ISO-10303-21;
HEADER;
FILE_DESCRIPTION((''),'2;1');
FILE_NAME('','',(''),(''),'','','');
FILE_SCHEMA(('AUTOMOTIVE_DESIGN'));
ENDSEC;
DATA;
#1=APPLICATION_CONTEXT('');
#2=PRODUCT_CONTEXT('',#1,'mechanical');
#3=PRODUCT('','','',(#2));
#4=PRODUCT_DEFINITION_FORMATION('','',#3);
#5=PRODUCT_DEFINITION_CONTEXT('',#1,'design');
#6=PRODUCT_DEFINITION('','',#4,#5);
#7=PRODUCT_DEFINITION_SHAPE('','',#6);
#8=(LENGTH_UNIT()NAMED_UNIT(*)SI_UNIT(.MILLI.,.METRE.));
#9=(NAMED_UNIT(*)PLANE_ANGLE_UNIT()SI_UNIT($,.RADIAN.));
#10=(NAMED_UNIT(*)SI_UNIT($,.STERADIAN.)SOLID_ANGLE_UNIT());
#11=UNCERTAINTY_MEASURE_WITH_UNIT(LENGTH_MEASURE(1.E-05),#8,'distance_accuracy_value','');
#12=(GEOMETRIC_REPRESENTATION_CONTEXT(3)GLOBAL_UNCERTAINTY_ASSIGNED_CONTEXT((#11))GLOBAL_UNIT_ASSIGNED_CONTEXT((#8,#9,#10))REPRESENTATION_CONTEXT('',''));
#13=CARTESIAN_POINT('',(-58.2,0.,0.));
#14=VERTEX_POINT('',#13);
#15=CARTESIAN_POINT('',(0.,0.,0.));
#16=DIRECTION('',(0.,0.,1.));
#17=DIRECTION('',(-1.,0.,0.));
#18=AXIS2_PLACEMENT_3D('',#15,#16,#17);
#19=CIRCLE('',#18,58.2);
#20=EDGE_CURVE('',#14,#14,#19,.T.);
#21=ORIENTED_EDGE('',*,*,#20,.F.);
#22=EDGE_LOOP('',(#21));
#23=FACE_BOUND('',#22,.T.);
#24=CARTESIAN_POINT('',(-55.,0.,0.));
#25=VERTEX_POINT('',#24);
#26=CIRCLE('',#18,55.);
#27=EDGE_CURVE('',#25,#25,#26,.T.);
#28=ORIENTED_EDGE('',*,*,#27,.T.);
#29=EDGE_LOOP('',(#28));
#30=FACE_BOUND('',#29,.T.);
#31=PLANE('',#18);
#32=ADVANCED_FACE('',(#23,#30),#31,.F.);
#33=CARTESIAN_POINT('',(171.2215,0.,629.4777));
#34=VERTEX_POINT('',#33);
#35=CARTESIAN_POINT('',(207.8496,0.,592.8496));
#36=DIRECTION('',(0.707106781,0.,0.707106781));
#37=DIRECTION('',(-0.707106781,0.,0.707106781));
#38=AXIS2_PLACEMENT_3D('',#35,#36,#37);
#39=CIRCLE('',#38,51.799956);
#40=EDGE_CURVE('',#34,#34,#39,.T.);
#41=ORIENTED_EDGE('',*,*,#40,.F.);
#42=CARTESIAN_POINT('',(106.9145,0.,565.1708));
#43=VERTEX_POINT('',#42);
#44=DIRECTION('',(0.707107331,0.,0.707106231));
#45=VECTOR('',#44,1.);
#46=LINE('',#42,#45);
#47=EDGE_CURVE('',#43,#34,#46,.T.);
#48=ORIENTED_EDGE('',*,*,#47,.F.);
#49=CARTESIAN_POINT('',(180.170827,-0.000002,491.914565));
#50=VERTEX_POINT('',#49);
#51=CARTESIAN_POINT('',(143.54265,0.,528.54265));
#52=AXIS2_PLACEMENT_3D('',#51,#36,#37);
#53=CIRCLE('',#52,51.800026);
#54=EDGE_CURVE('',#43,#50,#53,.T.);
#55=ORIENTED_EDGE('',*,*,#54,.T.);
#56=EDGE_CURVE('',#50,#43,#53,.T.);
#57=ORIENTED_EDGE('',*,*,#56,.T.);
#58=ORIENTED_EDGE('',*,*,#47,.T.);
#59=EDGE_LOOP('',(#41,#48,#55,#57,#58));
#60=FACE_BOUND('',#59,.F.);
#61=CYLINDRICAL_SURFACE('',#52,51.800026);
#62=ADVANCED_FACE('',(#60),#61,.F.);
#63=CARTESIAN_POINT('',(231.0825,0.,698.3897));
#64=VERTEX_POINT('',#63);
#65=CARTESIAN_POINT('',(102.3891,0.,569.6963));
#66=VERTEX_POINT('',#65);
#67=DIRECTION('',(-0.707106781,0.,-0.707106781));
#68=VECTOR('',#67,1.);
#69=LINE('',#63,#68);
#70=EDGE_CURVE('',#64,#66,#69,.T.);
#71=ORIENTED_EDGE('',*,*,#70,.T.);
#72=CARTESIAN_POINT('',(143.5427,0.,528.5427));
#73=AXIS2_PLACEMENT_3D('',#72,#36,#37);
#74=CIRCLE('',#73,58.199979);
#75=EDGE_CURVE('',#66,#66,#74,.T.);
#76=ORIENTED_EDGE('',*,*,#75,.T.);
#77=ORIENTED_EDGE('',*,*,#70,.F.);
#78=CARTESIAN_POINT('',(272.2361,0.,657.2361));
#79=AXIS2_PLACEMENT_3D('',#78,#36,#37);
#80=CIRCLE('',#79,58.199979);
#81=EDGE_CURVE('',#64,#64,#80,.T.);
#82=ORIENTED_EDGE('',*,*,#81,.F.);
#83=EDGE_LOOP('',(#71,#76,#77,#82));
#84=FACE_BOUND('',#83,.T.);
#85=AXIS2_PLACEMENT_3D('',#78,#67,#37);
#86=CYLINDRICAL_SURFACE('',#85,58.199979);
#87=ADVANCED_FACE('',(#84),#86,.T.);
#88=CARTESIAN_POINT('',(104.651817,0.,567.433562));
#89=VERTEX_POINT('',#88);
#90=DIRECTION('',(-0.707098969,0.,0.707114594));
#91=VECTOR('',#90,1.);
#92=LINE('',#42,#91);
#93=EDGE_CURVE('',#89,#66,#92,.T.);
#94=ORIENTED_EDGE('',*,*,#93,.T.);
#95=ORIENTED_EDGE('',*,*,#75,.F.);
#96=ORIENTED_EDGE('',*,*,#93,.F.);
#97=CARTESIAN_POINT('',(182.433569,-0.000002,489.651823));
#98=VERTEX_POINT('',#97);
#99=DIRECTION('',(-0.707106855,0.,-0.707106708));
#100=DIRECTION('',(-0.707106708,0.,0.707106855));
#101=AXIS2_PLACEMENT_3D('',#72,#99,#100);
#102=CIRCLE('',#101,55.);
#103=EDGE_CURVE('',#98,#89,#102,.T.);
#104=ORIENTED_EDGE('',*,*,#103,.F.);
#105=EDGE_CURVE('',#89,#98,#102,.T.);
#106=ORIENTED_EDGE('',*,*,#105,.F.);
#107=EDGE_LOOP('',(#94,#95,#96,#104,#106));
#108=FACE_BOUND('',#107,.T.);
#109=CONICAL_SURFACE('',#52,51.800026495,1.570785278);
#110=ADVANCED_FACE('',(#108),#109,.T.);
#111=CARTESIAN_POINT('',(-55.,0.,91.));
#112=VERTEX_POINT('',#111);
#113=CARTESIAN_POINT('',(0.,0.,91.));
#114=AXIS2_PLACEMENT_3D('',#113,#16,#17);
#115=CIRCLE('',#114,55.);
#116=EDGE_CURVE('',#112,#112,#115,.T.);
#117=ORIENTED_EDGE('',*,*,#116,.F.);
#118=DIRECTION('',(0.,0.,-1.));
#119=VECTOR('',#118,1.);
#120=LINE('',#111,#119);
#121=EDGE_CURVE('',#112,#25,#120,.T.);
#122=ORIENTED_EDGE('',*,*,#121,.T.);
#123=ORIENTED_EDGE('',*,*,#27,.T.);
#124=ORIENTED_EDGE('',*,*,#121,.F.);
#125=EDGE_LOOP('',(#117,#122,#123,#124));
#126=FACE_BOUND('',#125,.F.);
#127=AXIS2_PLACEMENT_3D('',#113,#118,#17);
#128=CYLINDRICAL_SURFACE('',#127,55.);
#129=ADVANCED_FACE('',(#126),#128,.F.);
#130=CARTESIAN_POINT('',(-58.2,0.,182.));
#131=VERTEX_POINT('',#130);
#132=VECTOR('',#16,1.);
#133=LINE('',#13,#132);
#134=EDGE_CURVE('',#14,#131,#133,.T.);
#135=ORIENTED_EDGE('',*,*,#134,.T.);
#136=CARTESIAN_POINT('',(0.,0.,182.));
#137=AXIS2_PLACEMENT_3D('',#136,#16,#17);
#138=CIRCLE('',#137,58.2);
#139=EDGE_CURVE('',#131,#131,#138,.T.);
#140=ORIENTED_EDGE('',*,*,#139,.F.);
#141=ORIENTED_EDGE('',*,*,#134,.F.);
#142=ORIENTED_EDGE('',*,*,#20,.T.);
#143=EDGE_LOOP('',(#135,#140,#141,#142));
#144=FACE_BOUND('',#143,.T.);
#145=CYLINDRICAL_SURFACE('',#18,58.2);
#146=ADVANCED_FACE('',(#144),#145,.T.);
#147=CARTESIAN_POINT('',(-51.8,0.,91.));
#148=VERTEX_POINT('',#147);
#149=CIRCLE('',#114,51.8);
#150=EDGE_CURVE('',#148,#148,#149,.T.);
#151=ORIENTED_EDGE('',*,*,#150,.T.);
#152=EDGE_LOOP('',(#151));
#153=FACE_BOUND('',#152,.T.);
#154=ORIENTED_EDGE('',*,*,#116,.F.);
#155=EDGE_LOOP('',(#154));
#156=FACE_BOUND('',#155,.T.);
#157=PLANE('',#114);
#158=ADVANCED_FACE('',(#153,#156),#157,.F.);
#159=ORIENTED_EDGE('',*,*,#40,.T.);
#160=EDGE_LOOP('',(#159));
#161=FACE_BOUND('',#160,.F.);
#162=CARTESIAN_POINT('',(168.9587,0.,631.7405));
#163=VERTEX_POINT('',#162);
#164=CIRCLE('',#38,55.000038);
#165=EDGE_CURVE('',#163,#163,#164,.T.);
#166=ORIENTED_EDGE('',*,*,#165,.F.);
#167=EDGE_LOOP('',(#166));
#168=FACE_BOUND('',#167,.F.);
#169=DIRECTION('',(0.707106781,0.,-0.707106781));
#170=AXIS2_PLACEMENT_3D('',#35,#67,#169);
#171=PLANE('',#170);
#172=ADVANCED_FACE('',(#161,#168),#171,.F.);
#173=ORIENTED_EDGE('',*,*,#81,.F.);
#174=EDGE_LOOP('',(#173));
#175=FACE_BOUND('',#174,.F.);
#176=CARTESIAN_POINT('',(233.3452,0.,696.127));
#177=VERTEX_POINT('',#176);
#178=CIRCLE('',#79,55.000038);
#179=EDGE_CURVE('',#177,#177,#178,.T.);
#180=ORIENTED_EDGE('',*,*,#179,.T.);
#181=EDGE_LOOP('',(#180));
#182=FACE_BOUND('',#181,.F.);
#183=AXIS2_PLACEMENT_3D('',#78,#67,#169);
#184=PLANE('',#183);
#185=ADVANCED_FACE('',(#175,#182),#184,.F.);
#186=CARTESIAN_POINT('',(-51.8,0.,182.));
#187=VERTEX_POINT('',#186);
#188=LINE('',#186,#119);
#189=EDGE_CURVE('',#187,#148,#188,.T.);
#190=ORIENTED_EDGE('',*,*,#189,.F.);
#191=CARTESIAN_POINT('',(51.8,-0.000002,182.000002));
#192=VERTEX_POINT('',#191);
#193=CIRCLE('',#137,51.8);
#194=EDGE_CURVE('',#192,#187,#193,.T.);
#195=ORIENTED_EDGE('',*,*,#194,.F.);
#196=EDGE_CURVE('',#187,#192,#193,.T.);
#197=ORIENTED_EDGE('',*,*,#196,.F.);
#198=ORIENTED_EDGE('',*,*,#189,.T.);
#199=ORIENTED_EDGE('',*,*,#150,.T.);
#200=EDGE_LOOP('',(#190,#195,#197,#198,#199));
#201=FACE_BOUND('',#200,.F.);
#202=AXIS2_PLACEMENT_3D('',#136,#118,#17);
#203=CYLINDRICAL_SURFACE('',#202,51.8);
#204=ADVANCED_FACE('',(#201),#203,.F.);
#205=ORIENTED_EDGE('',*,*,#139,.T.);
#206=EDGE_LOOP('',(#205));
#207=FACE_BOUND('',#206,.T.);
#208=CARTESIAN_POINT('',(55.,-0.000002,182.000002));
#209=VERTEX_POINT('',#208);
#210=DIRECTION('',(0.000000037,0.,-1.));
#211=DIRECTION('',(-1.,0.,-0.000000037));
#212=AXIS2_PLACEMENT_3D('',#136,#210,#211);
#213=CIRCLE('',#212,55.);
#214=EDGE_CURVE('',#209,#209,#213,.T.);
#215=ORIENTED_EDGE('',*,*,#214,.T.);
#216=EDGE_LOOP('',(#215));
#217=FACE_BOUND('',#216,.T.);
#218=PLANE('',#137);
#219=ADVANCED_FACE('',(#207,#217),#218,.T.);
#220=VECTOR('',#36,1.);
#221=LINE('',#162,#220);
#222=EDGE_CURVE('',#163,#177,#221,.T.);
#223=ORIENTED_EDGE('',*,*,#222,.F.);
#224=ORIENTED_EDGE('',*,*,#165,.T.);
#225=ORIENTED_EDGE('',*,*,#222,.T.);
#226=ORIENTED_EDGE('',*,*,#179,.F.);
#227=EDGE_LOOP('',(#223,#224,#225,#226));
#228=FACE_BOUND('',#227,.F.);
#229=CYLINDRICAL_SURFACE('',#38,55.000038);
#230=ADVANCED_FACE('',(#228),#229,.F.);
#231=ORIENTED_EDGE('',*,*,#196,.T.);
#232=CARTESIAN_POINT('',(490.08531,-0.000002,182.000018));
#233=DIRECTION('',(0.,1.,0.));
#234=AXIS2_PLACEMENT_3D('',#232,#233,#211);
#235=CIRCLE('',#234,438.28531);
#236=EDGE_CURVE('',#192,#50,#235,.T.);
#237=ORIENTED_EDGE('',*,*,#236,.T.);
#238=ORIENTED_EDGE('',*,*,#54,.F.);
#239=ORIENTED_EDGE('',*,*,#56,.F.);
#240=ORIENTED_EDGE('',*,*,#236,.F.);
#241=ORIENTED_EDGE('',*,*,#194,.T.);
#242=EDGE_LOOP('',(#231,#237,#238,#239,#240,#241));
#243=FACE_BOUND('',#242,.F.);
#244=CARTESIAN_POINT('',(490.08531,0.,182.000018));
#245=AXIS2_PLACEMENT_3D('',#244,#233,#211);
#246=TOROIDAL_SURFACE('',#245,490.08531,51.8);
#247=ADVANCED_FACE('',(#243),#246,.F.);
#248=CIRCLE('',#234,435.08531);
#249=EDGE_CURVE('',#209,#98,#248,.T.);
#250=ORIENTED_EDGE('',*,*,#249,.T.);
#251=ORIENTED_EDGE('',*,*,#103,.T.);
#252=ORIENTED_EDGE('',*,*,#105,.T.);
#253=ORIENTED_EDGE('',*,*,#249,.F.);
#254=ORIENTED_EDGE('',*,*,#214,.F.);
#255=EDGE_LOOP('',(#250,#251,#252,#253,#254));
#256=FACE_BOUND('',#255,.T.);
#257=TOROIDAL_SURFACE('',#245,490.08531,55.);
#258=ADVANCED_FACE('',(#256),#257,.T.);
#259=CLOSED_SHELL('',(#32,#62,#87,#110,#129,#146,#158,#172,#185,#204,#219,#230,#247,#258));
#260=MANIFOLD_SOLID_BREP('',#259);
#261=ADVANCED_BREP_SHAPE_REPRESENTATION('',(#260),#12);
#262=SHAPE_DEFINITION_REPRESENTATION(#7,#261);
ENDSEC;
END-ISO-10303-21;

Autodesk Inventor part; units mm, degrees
ref_plane "YZ Plane" through (0, 0, 0) normal (1, 0, 0) x (0, 1, 0)
ref_plane "XZ Plane" through (0, 0, 0) normal (0, 1, 0) x (-1, 0, 0)
ref_plane "XY Plane" through (0, 0, 0) normal (0, 0, 1) x (1, 0, 0)
sketch "Sketch1" plane through (0, 0, 0) normal (0, 1, 0) x (-1, 0, 0)
  line L0 (0, 0) -> (0, 182) construction
  line L1 (0, 182) -> (51.8, 182) construction
  line L2 (51.8, 182) -> (51.8, 91)
  line L3 (51.8, 91) -> (55, 91)
  line L4 (55, 91) -> (55, 0)
  line L5 (55, 0) -> (58.2, 0)
  line L6 (58.2, 0) -> (58.2, 182)
  line L7 (58.2, 182) -> (51.8, 182)
  line L8 (55, 0) -> (0, 0) construction
  line L9 (0, 182) -> (0, 385) construction
  line L10 (0, 385) -> (-143.5427, 528.5427) construction
  line L11 (-143.5427, 528.5427) -> (-106.9145, 565.1708) construction
  line L12 (-106.9145, 565.1708) -> (-171.2215, 629.4777)
  line L13 (-171.2215, 629.4777) -> (-168.9587, 631.7405)
  line L14 (-168.9587, 631.7405) -> (-233.3452, 696.127)
  line L15 (-233.3452, 696.127) -> (-231.0825, 698.3897)
  line L16 (-231.0825, 698.3897) -> (-102.3891, 569.6963)
  line L17 (-106.9145, 565.1708) -> (-102.3891, 569.6963)
  line L18 (-143.5427, 528.5427) -> (-272.2361, 657.2361) construction
  line L19 (-233.3452, 696.127) -> (-272.2361, 657.2361) construction
  line L20 (0, 182) -> (-490.0854, 182) construction
  line L21 (-143.5427, 528.5427) -> (-490.0854, 182) construction
  arc A0 (0, 182) -> (-143.5427, 528.5427) centre (-490.0854, 182) ccw
  line L22 (-143.5427, 528.5427) -> (-143.5427, 182) construction
  line L23 (51.8, 91) -> (0, 91) construction
  line L24 (-171.2215, 629.4777) -> (-207.8496, 592.8496) construction
  dimension "d0" = 182
  dimension "d1" = 91
  dimension "d2" = 103.6
  dimension "d3" = 110
  dimension "d4" = 116.4
  dimension "d5" = 203
  dimension "d6" = 203
  dimension "d7" = 182
  dimension "d8" = 91
  dimension "d9" = 103.6
  dimension "d10" = 110
  dimension "d11" = 116.4
  dimension "d12" = 45
revolve "Revolve1" add sketch "Sketch1" angle 360 about axis through (0, 0, 0) along (0, 0, 1) contours L7 L6 L5 L4 L3 L2
revolve "Revolve2" add sketch "Sketch1" angle 360 about axis through (143.5427, 0, 528.5427) along (0.7071068, 0, 0.7071068) contours L12 L13 L14 L15 L16 L17
sketch "Sketch2" plane through (0, 0, 182) normal (0, 0, 1) x (1, 0, 0)
  circle A0 centre (0, 0) radius 51.8 projected
  circle A1 centre (0, 0) radius 55 projected
sweep "Sweep1" add profiles "Sketch2" path "Sketch1" path curves A0
equation "\"d0\" = 2 * tk"
equation "\"d1\" = tk"
equation "\"d2\" = d - 2 * s1"
equation "\"d3\" = d"
equation "\"d4\" = d + 2 * s1"
equation "\"d5\" = zk"
equation "\"d6\" = zk"
equation "\"d7\" = 2 * tk"
equation "\"d8\" = tk"
equation "\"d9\" = d - 2 * s1"
equation "\"d10\" = d"
equation "\"d11\" = d + 2 * s1"
equation "\"zk\" = 203"
equation "\"tk\" = 91"
equation "\"d\" = 110"
equation "\"s1\" = 3.2"
properties part number "DIN 8063 Двойная подвижная соединительная муфта с изгибом 45 градусов со стыковой сваркой - MMK - KK 110 - 3" material "ПВХ, непластифицированный"
